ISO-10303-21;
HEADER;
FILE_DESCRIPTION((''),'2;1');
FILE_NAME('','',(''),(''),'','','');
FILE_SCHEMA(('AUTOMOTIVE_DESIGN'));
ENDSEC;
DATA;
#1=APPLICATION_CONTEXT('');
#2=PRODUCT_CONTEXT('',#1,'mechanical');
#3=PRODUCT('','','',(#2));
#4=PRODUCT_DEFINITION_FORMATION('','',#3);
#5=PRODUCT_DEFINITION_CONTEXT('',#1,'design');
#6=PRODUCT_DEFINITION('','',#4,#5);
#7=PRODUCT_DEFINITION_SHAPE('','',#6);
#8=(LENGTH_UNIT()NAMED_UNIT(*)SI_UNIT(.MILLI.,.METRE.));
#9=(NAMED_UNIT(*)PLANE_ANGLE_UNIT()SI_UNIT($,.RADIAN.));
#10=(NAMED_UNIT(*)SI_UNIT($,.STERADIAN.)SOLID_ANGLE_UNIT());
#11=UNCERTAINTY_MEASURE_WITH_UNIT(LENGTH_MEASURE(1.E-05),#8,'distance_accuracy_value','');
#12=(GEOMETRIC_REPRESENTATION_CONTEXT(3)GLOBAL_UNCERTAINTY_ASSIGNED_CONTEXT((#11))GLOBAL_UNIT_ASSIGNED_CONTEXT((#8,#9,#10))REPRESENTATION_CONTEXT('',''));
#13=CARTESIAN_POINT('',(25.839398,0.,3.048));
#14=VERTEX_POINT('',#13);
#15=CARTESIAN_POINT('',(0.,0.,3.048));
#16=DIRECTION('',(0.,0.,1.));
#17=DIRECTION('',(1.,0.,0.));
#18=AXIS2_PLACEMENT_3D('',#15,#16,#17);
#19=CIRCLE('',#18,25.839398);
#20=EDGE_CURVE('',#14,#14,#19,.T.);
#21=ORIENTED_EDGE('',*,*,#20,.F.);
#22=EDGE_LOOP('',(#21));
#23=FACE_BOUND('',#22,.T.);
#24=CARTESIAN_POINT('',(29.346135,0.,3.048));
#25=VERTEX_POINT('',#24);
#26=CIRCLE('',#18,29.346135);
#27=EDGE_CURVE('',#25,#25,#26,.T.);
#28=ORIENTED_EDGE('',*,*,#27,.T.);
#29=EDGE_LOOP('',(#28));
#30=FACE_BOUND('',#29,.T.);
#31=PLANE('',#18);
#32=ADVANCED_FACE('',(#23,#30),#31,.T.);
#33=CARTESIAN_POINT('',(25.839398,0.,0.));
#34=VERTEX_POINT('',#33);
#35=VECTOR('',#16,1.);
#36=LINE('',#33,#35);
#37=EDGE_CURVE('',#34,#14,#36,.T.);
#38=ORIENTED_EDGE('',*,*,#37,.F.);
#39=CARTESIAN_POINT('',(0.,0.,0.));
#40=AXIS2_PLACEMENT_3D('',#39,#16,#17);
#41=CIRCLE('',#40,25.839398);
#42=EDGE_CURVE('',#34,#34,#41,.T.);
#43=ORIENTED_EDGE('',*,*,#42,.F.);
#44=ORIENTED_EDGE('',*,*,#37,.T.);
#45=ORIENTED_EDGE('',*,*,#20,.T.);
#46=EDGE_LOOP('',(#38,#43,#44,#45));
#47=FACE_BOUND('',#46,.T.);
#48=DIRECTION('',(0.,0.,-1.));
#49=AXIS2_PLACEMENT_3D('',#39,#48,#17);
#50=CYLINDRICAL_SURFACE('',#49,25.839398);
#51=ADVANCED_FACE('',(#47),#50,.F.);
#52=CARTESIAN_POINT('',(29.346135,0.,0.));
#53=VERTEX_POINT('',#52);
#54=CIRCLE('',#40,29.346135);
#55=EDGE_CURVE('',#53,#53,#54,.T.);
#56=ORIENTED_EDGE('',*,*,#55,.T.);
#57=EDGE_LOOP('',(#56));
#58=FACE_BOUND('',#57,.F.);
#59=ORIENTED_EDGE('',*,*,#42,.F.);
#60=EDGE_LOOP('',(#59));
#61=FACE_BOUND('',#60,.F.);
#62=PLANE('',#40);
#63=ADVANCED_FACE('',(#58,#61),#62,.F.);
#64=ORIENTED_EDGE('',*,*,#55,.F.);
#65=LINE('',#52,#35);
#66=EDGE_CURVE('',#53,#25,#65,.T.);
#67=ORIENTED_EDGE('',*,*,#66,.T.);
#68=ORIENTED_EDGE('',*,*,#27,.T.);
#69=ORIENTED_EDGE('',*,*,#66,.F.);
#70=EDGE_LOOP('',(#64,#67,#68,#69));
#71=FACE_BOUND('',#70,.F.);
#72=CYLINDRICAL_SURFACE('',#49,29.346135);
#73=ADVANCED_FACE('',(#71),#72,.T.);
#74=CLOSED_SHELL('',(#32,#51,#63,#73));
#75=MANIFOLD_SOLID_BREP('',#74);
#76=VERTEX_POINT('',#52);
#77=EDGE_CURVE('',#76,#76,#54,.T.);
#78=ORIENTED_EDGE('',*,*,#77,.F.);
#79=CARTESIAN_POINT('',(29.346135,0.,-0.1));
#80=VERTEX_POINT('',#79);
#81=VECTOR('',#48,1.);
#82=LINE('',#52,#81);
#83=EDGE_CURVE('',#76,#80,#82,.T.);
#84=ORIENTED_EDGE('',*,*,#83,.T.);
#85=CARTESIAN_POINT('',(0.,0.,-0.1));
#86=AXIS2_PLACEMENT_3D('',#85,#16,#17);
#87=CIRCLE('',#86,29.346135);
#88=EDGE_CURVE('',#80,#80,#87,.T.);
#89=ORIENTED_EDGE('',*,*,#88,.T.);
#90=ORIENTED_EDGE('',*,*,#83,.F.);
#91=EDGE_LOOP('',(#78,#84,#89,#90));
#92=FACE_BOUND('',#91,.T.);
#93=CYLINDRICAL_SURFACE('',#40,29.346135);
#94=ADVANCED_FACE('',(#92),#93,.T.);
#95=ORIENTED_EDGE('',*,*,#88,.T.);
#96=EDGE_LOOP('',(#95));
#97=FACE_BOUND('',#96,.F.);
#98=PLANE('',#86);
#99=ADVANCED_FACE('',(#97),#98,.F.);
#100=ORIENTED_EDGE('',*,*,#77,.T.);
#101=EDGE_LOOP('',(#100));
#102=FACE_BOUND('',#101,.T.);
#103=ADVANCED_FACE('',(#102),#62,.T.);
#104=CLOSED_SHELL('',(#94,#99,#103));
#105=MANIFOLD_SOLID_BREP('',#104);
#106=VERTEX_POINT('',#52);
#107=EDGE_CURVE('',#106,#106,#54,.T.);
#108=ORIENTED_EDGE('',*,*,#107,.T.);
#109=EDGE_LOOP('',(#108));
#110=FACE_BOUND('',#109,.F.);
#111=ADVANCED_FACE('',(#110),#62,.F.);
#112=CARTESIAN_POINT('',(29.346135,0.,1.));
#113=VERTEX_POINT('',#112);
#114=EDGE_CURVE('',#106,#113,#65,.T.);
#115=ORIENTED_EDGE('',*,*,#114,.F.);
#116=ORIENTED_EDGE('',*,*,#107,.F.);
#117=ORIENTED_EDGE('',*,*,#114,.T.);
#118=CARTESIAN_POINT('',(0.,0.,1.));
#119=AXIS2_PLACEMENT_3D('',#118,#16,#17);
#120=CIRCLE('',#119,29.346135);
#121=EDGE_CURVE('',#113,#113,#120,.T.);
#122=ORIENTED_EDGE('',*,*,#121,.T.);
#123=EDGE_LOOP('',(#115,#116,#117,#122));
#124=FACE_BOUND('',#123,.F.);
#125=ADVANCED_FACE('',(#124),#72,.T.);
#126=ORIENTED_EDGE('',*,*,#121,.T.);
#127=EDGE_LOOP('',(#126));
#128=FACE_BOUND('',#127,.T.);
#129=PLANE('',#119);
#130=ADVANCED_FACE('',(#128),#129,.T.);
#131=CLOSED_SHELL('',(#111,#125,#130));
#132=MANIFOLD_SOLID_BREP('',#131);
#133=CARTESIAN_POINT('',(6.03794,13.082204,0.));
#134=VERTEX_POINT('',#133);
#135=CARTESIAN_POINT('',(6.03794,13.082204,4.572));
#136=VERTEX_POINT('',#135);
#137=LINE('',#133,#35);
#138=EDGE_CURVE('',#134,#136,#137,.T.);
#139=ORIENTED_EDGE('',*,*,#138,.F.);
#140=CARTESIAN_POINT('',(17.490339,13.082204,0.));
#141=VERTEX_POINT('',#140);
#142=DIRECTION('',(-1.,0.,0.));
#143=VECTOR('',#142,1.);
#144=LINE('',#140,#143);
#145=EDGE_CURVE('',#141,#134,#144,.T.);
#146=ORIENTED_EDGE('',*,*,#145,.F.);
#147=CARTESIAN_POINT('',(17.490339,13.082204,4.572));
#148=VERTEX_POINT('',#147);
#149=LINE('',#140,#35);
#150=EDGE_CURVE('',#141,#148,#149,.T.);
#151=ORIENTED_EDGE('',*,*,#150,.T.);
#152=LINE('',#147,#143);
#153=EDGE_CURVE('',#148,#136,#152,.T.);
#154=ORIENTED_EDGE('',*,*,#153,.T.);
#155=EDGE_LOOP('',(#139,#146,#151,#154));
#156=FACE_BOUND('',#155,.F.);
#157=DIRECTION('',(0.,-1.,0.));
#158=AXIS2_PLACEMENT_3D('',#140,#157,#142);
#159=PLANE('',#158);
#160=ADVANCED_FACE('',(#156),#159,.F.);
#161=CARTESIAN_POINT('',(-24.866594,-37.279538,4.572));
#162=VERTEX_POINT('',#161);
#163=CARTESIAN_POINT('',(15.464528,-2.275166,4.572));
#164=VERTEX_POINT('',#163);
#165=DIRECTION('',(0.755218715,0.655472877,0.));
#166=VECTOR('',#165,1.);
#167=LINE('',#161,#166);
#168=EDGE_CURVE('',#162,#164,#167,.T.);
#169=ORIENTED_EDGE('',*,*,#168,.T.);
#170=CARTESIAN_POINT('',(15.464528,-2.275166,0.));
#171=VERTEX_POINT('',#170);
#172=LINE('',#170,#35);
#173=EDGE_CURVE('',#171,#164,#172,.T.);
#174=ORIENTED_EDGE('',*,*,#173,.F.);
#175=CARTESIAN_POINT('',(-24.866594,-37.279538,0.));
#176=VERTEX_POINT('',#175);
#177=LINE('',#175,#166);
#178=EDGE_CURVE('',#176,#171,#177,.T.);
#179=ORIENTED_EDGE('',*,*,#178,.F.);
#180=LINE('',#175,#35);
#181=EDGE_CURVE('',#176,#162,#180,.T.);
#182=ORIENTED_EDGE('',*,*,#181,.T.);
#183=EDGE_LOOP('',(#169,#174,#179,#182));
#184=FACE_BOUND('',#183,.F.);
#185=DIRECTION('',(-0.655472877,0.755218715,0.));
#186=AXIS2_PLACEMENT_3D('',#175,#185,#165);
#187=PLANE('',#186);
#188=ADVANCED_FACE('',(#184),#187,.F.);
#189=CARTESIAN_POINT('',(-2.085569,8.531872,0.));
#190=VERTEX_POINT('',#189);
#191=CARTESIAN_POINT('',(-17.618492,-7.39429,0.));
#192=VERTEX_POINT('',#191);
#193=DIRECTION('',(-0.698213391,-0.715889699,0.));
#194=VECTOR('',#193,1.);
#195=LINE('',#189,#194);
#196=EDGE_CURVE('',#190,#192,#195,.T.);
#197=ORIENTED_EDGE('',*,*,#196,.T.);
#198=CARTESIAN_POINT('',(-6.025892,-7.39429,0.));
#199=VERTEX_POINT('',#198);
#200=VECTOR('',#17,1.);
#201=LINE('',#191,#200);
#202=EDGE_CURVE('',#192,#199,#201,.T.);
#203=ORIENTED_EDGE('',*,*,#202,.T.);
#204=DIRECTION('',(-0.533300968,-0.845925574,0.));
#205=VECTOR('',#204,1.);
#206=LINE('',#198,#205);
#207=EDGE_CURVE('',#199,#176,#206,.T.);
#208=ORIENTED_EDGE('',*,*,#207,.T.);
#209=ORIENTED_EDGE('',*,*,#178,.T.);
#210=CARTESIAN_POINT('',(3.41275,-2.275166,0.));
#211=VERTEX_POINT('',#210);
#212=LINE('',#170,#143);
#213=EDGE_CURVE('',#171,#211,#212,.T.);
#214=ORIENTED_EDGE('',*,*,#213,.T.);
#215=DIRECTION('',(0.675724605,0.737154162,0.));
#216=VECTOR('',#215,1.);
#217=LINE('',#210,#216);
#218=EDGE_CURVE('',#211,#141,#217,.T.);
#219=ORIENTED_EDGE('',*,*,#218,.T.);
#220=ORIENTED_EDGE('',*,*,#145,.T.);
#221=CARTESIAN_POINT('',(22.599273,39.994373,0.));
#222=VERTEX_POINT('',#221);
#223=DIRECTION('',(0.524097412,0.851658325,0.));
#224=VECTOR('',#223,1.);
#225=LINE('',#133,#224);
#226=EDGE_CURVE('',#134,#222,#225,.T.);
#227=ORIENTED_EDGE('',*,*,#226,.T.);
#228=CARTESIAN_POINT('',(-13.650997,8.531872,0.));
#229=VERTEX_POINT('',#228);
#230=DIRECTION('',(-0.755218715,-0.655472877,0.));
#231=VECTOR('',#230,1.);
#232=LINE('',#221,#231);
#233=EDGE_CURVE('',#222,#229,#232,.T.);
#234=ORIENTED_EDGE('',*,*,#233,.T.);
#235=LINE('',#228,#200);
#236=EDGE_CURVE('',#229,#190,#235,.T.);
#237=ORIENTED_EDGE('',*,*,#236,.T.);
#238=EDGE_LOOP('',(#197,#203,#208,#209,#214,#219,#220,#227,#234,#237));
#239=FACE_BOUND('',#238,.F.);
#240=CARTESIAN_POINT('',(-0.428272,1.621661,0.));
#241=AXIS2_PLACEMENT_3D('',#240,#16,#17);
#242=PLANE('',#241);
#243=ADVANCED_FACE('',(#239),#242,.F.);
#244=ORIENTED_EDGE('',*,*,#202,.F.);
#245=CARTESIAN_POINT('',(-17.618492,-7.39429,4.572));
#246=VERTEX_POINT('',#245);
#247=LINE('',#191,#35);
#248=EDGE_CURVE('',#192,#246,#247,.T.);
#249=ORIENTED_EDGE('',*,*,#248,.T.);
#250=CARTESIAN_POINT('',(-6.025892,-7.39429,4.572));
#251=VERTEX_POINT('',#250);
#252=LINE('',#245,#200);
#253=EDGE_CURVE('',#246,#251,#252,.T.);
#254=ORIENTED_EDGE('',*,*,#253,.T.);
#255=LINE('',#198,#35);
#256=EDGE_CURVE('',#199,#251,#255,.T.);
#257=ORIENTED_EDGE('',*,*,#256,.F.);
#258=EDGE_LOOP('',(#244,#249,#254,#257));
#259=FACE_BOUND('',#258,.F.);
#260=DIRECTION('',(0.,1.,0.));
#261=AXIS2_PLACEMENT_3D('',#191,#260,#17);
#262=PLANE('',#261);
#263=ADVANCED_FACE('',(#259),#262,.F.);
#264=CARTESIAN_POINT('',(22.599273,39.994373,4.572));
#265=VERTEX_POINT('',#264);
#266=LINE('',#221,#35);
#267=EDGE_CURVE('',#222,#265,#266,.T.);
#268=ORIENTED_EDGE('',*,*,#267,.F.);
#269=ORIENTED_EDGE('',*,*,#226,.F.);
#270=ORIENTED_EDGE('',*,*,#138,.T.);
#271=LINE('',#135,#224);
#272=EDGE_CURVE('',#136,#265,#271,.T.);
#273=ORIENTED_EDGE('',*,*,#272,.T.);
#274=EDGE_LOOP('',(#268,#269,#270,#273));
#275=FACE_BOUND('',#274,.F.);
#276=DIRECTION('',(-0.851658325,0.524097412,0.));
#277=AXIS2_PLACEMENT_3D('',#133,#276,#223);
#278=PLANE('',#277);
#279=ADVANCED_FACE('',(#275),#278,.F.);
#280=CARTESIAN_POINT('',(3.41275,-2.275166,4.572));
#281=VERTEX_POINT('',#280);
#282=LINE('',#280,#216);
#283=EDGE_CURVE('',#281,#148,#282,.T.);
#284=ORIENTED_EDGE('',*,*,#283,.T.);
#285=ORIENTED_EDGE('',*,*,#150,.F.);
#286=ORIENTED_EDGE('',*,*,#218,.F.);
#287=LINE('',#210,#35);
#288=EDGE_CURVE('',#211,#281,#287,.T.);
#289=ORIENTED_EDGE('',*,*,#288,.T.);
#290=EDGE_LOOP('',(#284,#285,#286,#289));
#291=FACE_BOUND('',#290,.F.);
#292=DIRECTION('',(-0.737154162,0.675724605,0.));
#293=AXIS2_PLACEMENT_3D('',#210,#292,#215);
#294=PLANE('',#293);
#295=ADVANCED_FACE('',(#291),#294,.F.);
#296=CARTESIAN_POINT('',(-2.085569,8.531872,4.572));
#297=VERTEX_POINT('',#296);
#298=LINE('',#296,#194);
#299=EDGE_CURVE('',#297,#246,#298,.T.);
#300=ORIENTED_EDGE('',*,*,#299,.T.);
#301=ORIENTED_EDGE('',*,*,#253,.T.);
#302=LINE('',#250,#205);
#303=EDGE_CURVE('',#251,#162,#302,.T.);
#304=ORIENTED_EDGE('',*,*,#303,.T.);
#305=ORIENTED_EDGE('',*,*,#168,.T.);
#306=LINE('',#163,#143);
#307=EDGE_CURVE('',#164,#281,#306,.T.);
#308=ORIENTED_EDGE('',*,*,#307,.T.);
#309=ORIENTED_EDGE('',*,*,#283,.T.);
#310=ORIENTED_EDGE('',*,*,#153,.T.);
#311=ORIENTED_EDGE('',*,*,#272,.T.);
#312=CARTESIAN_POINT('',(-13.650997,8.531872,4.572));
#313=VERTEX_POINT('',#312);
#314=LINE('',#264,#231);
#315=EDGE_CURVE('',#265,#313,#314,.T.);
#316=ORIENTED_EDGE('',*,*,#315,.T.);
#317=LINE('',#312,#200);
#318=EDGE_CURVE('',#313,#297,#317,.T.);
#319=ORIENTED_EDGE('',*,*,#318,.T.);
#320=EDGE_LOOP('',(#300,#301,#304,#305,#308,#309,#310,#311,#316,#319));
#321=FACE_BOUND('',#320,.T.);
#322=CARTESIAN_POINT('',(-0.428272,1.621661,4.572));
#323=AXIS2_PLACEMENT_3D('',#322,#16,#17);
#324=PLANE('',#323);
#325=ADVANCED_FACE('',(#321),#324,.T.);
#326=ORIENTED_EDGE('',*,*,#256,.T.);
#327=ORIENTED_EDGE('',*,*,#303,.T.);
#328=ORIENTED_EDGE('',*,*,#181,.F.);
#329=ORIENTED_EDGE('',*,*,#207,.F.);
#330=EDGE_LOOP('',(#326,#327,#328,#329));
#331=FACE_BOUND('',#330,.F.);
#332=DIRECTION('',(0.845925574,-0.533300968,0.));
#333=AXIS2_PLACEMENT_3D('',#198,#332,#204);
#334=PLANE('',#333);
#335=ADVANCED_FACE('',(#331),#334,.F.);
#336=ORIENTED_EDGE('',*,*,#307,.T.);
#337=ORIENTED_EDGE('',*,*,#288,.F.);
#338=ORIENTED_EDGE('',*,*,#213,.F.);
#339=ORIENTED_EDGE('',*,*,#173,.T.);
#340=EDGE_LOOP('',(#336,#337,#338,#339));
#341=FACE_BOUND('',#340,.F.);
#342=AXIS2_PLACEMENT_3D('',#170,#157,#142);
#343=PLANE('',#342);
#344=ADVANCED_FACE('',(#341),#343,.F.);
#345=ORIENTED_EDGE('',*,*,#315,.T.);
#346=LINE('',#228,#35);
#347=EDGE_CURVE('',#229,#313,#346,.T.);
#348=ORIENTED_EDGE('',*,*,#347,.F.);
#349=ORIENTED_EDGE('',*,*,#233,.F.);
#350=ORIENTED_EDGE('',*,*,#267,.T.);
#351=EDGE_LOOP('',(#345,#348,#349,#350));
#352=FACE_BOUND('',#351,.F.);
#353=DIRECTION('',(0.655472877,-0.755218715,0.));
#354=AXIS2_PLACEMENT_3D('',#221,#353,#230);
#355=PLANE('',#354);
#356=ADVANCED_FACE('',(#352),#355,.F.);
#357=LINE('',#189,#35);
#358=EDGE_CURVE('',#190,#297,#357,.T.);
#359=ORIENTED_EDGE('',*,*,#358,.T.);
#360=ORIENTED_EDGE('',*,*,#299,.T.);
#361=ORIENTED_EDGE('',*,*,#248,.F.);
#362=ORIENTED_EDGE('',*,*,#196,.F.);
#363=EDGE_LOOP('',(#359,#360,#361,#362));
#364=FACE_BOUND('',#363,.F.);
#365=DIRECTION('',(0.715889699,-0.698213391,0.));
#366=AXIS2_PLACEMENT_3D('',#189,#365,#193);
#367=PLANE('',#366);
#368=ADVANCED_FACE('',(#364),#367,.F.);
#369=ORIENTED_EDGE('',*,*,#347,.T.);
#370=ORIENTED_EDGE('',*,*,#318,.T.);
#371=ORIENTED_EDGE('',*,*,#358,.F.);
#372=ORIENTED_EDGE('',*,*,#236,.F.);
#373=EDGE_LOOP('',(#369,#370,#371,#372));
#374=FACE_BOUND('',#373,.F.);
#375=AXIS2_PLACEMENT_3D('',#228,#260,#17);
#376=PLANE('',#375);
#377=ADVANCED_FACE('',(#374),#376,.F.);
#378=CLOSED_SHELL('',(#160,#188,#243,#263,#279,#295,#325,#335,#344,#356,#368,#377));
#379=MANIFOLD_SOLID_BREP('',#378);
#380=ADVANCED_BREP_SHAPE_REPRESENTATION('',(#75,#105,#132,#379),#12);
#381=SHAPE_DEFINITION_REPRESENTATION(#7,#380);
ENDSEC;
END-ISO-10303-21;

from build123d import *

# Parameters (mm, degrees)
F1_R     = 29.346135088
F1_R_2   = 25.8393981861
F5_DEPTH = 1
F6_DEPTH = 0.1
F7_DEPTH = 3.048
F8_DEPTH = 4.572


# Not quite as in the source:
# - the program builds the solid bodies; features that only make, move or delete a surface that nothing else refers to are left out


with BuildPart() as f5:
    # F1 (on face) → F5 (new body)
    with BuildSketch(Plane.XY):
        Circle(F1_R)
        Circle(F1_R_2, mode=Mode.SUBTRACT)
        Circle(F1_R_2)
    extrude(amount=F5_DEPTH)


with BuildPart() as f6:
    # F1 (on face) → F6 (new body)
    with BuildSketch(Plane.XY):
        Circle(F1_R)
        Circle(F1_R_2, mode=Mode.SUBTRACT)
        Circle(F1_R_2)
    extrude(amount=-F6_DEPTH)


with BuildPart() as f7:
    # F1 (on face) → F7 (new body)
    with BuildSketch(Plane.XY):
        Circle(F1_R)
        Circle(F1_R_2, mode=Mode.SUBTRACT)
    extrude(amount=F7_DEPTH)


with BuildPart() as f8:
    # F2 (on Top) → F8 (new body)
    with BuildSketch(Plane.XY):
        Polygon((6.0379398285, 13.0822043866), (22.5992734988, 39.9943725895), (-13.6509970043, 8.5318721831), (-2.0855690818, 8.5318721831), (-17.6184918681, -7.3942895979), (-6.025892119, -7.3942895979), (-24.8665944569, -37.2795380606), (15.4645281288, -2.2751658689), (3.412750084, -2.2751658689), (17.4903385899, 13.0822043866), align=None)
    extrude(amount=F8_DEPTH)


solid = Compound([f5.part, f6.part, f7.part, f8.part])
